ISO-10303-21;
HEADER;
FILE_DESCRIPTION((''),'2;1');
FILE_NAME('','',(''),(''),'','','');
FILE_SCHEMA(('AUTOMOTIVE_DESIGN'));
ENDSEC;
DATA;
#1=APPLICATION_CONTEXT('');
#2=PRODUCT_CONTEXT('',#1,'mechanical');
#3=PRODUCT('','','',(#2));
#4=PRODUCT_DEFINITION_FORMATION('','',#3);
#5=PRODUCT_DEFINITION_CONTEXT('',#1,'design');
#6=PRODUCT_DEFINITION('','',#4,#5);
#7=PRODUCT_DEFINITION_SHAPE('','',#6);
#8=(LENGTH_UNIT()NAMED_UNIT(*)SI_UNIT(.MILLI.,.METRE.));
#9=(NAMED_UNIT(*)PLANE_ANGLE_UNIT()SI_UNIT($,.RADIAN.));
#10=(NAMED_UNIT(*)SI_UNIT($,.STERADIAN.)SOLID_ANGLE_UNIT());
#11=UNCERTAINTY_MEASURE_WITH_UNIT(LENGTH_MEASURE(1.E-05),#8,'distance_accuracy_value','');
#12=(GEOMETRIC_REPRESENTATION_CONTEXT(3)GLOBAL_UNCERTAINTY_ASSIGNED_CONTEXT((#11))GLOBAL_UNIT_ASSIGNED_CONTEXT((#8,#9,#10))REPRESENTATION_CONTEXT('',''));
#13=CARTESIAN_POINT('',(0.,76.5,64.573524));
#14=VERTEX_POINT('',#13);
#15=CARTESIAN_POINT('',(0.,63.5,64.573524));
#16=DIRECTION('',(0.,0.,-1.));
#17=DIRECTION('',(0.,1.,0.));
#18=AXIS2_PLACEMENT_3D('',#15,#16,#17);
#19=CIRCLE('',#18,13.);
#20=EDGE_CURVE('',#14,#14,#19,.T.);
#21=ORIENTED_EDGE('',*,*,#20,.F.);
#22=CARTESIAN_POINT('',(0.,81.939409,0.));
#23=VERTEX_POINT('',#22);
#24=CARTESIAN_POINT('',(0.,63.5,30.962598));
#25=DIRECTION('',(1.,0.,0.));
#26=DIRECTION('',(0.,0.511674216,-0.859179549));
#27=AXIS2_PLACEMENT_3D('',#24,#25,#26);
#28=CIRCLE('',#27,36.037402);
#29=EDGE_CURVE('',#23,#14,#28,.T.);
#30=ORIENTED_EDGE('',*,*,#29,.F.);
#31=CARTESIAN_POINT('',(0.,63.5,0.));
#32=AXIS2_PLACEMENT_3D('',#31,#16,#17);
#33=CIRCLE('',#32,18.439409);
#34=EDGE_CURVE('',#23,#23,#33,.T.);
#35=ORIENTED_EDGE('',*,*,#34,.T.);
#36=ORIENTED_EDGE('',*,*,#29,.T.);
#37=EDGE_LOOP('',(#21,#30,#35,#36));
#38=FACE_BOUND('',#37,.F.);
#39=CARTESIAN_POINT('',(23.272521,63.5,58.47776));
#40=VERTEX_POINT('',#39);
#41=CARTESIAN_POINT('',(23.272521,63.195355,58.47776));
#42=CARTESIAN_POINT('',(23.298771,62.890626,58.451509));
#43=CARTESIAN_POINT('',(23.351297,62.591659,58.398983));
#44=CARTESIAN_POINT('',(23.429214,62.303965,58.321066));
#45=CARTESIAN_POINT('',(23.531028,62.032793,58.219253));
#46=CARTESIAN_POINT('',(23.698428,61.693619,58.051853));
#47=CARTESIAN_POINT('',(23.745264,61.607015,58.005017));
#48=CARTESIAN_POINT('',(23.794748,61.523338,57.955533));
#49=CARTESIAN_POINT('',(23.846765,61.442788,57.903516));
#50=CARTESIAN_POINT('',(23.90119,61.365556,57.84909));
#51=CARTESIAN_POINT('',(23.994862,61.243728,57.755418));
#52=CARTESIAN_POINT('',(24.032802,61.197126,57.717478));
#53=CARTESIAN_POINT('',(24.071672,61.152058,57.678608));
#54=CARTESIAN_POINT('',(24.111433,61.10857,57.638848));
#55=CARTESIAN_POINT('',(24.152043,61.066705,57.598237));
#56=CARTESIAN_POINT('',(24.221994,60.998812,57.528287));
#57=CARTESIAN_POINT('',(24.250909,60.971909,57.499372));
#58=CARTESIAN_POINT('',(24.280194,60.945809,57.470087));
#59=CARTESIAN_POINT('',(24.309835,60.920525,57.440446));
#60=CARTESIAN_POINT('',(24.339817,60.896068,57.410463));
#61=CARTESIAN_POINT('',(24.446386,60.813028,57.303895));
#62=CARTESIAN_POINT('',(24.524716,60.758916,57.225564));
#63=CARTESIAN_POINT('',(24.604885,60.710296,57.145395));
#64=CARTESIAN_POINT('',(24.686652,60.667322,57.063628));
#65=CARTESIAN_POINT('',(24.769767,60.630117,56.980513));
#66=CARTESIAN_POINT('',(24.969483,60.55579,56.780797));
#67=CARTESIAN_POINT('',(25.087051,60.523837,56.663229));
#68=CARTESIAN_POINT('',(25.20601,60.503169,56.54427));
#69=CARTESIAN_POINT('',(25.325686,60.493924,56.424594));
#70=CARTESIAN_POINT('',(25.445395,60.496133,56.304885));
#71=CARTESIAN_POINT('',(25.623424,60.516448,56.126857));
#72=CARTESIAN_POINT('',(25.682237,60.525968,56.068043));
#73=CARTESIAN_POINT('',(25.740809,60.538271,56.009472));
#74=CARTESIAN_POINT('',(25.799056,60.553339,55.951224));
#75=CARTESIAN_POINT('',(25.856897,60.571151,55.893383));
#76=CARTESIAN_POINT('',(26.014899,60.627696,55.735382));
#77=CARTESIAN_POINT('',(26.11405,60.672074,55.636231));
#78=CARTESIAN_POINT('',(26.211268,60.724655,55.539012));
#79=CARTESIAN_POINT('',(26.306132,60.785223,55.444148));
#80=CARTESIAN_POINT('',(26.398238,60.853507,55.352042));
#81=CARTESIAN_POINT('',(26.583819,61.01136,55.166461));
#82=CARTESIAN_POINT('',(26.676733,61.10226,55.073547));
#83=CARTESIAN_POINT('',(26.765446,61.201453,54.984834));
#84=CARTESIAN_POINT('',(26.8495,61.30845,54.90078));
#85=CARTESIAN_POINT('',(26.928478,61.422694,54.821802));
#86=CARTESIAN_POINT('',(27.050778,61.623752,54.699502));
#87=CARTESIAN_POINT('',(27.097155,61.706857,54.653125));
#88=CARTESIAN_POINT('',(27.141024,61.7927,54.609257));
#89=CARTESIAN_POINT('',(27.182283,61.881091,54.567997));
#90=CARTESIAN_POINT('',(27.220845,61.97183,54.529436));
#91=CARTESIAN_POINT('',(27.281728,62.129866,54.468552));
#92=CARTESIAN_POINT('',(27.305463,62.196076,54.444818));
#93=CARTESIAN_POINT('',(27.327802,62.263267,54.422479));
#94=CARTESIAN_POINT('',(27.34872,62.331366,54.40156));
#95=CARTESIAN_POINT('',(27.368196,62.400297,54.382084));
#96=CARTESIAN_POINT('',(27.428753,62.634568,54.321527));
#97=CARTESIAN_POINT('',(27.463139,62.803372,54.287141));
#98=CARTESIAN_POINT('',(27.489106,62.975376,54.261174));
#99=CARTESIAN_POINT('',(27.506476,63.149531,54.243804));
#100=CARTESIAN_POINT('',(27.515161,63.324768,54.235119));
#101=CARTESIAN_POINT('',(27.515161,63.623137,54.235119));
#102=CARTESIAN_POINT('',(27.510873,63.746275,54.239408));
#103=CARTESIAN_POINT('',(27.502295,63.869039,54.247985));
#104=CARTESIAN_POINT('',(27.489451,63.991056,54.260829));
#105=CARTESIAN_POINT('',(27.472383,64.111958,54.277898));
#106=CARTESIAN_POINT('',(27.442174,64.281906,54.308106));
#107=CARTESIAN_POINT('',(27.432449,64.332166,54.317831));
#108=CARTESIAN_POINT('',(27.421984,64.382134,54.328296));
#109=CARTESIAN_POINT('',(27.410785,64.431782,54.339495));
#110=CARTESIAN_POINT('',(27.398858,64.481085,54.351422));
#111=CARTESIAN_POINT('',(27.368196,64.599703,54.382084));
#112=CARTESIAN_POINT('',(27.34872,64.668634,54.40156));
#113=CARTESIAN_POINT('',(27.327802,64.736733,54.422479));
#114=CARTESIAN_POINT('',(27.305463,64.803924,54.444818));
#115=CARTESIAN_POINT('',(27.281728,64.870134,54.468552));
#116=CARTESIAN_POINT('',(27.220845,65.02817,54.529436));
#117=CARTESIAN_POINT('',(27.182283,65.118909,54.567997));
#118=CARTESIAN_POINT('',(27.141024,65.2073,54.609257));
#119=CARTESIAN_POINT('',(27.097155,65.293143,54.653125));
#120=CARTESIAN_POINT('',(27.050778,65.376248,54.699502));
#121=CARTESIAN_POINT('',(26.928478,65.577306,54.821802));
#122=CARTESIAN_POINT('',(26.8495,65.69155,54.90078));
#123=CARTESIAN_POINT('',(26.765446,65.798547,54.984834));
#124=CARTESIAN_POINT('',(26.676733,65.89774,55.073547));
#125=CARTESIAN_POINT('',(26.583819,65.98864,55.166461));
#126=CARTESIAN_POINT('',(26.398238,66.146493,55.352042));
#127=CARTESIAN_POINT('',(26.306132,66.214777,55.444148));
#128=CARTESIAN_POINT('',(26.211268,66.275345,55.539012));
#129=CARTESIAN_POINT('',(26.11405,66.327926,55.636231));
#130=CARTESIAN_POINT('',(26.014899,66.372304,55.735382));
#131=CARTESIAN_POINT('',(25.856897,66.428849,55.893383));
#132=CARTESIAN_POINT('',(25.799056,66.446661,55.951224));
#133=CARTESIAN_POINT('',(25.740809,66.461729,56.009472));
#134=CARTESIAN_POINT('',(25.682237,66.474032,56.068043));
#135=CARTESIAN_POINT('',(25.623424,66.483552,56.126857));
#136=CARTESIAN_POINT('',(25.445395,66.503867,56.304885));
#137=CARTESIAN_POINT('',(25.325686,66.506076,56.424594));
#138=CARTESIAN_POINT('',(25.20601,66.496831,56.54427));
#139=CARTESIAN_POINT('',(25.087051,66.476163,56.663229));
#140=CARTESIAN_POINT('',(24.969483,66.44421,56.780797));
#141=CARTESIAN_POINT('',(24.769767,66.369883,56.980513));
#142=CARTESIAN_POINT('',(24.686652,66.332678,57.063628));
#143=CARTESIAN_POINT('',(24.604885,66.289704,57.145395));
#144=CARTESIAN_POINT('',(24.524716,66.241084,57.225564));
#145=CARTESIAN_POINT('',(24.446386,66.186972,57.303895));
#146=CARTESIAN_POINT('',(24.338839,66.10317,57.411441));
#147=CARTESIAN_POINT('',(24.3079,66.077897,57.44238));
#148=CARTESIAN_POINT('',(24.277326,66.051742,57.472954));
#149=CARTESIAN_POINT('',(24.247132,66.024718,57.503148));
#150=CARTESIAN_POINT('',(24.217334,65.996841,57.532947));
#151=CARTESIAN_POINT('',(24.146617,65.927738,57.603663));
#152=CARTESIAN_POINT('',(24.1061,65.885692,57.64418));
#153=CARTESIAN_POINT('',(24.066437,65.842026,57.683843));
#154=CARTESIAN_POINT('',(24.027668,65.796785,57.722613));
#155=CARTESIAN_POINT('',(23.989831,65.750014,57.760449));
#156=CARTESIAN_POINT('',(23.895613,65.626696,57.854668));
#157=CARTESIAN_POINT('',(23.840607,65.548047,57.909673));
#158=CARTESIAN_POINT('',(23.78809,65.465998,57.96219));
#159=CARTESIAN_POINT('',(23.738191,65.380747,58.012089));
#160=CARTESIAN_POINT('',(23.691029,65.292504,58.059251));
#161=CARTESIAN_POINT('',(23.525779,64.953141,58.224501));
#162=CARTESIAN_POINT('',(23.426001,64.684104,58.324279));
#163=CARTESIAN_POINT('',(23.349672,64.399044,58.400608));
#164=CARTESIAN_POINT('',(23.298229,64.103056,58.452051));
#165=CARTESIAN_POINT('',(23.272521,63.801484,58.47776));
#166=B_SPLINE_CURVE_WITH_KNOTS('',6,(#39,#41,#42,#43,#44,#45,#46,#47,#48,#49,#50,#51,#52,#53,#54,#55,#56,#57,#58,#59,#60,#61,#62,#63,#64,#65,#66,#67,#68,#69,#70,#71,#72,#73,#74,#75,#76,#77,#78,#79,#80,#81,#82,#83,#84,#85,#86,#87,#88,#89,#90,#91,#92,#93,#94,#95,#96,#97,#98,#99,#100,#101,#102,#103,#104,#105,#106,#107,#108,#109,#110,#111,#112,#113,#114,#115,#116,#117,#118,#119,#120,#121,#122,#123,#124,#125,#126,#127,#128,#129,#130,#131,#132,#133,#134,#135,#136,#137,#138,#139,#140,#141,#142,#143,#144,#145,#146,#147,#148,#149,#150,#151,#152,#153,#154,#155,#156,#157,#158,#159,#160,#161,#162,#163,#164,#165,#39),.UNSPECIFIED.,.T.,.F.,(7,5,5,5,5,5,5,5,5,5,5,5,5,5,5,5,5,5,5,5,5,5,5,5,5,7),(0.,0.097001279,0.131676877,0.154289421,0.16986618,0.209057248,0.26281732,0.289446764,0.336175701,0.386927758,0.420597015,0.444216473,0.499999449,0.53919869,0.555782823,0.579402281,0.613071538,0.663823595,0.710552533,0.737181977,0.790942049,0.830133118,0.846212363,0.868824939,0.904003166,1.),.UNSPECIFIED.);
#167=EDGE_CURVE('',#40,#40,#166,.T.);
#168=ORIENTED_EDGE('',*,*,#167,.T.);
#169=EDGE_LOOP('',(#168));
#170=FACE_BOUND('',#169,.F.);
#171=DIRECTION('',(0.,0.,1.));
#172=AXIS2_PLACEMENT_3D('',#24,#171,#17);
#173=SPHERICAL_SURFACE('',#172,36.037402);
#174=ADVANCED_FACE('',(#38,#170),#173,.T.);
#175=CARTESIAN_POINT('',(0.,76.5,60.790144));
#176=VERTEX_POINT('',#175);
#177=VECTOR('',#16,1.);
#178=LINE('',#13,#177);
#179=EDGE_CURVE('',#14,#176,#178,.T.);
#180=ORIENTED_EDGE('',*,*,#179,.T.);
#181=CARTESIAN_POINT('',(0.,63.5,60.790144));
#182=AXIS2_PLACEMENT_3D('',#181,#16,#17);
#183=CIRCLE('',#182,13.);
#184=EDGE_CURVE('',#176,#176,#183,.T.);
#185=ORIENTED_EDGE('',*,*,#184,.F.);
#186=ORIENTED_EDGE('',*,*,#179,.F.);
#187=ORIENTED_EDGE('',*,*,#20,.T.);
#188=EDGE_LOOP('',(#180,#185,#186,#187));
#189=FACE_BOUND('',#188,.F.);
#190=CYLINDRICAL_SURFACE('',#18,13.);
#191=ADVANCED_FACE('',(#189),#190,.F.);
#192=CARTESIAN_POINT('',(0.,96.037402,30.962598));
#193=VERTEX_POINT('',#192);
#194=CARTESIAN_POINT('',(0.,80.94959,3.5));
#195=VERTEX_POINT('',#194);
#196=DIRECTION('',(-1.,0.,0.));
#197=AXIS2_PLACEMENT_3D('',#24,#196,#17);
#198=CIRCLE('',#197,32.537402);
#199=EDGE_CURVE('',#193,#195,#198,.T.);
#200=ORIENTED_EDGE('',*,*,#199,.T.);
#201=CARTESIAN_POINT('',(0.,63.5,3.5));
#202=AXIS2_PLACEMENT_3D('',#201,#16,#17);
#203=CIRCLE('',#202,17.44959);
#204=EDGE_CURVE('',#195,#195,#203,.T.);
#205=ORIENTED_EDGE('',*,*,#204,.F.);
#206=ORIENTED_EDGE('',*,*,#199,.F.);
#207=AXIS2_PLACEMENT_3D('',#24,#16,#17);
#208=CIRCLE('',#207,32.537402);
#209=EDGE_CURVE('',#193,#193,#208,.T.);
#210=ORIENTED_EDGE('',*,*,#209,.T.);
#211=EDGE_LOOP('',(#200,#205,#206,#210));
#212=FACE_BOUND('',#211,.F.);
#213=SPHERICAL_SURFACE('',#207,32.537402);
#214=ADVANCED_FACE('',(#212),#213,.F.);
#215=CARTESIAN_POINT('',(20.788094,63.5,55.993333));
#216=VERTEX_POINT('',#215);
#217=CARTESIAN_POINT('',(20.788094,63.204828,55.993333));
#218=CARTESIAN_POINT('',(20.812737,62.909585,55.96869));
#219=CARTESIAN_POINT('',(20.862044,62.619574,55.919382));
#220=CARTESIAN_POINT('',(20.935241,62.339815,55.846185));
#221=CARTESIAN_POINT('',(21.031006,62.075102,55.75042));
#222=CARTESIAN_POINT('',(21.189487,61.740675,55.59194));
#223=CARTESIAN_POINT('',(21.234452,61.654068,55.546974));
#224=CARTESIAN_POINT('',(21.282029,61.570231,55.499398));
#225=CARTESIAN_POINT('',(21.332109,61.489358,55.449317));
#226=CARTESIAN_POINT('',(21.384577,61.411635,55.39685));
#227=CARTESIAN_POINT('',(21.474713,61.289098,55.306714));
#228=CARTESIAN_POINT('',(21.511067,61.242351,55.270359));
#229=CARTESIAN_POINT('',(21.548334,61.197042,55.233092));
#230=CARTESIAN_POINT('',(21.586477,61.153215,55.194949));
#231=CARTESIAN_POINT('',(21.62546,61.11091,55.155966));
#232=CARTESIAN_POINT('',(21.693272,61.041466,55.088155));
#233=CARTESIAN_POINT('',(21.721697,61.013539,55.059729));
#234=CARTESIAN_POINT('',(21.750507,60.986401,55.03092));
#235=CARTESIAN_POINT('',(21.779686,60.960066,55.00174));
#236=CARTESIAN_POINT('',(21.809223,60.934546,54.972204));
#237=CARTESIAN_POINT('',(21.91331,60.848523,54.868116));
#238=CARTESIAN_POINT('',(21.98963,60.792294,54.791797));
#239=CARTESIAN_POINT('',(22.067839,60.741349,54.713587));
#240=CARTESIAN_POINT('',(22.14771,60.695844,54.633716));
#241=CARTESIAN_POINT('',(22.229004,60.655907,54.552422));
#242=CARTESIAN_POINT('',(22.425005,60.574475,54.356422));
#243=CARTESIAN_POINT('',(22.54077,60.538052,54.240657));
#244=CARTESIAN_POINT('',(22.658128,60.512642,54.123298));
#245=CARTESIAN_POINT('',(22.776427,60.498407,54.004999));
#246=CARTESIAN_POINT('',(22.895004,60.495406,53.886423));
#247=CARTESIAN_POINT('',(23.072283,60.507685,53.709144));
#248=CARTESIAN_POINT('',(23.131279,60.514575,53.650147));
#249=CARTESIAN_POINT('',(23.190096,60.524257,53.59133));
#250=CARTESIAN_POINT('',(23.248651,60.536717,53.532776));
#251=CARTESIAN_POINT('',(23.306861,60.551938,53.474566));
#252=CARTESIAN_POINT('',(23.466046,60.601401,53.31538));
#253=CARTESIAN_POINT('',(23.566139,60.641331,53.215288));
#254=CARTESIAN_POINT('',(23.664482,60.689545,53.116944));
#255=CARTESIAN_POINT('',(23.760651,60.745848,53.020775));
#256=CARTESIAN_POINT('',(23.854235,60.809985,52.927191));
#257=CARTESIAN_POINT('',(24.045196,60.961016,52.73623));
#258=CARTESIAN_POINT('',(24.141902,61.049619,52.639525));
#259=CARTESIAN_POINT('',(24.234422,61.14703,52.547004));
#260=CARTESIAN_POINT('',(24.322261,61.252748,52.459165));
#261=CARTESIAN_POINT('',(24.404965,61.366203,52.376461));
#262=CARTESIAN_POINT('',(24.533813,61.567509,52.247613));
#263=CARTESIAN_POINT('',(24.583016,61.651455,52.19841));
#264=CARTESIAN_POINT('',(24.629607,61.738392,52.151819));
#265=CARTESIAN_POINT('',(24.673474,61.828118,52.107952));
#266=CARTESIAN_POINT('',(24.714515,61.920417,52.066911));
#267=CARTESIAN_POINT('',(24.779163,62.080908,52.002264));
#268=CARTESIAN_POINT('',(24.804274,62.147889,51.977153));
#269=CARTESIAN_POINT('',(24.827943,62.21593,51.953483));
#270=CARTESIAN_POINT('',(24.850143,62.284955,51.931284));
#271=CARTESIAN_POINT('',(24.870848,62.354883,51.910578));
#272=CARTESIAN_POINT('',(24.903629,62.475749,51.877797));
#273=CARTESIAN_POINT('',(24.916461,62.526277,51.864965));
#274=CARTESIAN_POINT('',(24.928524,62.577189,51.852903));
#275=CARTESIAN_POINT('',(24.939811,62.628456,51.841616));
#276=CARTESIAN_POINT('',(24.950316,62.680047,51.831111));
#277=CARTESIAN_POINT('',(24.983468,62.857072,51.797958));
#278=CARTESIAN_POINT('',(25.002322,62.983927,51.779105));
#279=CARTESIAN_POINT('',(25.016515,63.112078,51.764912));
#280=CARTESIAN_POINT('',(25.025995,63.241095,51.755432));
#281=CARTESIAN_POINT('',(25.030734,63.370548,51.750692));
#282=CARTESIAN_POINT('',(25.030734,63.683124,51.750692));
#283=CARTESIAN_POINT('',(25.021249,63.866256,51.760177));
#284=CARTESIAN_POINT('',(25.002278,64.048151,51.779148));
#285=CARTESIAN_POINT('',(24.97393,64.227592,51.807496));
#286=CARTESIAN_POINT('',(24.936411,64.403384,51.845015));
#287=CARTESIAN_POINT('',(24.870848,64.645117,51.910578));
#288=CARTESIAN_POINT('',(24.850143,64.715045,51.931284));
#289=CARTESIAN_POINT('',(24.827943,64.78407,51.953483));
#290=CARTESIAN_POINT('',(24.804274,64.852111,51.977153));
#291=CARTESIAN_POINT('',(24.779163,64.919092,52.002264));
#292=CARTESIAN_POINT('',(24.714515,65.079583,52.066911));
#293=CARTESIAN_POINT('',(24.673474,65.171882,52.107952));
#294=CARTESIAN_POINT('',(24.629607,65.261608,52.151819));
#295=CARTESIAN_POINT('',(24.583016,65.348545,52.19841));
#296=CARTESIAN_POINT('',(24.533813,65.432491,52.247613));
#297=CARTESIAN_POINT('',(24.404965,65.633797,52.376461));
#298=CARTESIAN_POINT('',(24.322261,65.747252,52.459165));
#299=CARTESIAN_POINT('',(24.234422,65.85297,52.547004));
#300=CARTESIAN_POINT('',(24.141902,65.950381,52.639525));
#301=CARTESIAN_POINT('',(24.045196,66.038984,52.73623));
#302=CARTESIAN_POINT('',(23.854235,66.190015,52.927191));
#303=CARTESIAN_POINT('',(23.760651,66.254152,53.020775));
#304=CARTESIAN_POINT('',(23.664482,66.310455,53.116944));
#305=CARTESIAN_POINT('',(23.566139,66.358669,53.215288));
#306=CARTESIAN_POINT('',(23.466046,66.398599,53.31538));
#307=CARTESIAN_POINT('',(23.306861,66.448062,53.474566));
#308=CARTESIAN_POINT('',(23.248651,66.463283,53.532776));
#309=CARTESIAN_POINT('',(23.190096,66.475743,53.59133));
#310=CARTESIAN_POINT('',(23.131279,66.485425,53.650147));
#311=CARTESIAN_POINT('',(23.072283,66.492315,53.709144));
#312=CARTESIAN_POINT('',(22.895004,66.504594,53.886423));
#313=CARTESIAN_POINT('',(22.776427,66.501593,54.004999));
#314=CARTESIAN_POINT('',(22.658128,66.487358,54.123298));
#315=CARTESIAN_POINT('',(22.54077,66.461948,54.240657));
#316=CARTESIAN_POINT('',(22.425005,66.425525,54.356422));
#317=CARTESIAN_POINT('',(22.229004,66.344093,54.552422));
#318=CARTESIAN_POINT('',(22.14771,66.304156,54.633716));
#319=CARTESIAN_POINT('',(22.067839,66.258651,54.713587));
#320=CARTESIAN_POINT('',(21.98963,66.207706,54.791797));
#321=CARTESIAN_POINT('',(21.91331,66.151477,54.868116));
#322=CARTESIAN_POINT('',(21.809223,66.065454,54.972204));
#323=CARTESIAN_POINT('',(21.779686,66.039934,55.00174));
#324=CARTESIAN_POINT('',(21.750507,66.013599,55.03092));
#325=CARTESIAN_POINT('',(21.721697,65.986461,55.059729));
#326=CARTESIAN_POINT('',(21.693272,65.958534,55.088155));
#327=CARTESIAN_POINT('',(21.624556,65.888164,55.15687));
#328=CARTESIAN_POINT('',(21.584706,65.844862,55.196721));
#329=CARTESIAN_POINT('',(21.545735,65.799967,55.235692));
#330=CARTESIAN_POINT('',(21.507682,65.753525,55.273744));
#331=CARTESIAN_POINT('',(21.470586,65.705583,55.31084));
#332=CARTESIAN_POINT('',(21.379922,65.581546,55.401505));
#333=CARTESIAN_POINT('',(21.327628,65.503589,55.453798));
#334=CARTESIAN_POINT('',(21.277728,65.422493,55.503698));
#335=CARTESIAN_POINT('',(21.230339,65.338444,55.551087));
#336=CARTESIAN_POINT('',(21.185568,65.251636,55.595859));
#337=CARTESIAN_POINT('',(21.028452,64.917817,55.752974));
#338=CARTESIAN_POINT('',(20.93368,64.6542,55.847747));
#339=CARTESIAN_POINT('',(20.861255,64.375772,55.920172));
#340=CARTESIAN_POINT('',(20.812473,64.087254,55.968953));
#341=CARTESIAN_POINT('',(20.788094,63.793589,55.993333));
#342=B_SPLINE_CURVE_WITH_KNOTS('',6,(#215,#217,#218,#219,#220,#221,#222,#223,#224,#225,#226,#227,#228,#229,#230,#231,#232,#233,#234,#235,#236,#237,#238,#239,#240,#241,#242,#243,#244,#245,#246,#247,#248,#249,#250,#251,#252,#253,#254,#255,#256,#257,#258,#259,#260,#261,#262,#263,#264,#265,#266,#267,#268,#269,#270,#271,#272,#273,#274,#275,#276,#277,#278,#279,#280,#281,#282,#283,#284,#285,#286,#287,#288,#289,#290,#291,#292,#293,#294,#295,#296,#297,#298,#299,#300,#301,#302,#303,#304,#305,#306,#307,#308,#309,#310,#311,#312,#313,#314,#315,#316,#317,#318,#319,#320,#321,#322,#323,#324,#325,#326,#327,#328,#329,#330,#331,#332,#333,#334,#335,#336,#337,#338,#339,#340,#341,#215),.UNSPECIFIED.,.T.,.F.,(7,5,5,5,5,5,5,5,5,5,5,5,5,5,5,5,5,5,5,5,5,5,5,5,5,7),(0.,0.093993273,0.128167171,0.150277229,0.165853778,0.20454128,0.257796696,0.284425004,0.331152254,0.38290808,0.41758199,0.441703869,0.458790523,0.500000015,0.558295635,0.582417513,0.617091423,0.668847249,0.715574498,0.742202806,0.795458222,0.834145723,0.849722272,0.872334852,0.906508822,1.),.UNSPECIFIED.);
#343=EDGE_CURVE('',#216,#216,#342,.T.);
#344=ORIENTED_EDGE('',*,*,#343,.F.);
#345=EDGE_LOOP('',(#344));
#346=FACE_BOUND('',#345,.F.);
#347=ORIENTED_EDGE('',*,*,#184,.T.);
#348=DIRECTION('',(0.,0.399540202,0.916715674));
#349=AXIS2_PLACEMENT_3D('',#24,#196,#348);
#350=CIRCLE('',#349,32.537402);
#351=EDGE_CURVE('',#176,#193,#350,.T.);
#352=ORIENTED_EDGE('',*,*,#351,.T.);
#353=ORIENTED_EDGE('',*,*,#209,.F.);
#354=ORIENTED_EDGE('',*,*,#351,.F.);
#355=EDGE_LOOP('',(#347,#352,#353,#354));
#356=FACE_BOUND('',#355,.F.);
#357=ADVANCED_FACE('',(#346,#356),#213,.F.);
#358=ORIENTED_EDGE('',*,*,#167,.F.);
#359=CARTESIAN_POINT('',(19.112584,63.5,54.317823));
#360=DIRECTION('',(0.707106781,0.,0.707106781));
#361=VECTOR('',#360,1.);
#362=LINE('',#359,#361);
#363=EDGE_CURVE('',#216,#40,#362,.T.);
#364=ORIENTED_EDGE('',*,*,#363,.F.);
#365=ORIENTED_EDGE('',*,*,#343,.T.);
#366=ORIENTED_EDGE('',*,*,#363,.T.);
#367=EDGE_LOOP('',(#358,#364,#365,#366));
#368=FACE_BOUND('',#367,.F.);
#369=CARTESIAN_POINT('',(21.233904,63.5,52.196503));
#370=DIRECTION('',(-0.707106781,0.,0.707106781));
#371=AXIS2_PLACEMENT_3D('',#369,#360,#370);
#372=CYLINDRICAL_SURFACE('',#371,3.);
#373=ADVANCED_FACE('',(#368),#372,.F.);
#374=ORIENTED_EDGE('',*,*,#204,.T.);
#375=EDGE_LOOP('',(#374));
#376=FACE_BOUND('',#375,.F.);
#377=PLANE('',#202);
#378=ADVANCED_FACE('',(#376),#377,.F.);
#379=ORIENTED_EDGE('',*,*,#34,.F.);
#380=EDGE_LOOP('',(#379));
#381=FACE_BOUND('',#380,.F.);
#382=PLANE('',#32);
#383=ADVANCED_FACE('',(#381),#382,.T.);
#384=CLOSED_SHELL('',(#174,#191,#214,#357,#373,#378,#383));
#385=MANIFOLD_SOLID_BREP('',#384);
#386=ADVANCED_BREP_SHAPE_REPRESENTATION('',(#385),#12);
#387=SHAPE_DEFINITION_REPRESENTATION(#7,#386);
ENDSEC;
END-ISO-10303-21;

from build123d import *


with BuildPart() as f1:
    # F0 (on Right) → F1 (revolve)
    with BuildSketch(Plane.YZ):
        with BuildLine():
            Line((63.5, 3.5), (63.5, 0))
            Line((63.5, 0), (73.5, 0))
            ThreePointArc((73.5, 0), (77.3359133031, 1.5134897068), (80.9495899372, 3.5))
            Line((80.9495899372, 3.5), (63.5, 3.5))
        make_face()
        with BuildLine():
            ThreePointArc((80.9495899372, 3.5), (77.3359133031, 1.5134897068), (73.5, 0))
            Line((73.5, 0), (81.9394091831, 0))
            ThreePointArc((81.9394091831, 0), (99.4102229196, 33.9875285278), (76.5, 64.5735239147))
            Line((76.5, 64.5735239147), (76.5, 60.7901444396))
            ThreePointArc((76.5, 60.7901444396), (90.7182725546, 48.7908944847), (96.0374015748, 30.9625984252))
            ThreePointArc((96.0374015748, 30.9625984252), (92.017072223, 15.2954642562), (80.9495899372, 3.5))
        make_face()
    revolve(axis=Axis((0, 63.5, 33.5), (0, 0, -1)))

    # F3 (on line) → F4 (revolve, cut)
    with BuildSketch(Plane(origin=(0, 63.5, 0), x_dir=(-1, 0, 0), z_dir=(0, 1, 0))):
        Polygon((-27.3694280028, 58.332026428), (-21.2339044516, 52.1965028768), (-19.112584108, 54.3178232204), (-25.2481076593, 60.4533467716), align=None)
    revolve(axis=Axis((15.2781799182, 63.5, 46.2407783434), (0.7071067812, 0, 0.7071067812)), mode=Mode.SUBTRACT)


solid = f1.part
